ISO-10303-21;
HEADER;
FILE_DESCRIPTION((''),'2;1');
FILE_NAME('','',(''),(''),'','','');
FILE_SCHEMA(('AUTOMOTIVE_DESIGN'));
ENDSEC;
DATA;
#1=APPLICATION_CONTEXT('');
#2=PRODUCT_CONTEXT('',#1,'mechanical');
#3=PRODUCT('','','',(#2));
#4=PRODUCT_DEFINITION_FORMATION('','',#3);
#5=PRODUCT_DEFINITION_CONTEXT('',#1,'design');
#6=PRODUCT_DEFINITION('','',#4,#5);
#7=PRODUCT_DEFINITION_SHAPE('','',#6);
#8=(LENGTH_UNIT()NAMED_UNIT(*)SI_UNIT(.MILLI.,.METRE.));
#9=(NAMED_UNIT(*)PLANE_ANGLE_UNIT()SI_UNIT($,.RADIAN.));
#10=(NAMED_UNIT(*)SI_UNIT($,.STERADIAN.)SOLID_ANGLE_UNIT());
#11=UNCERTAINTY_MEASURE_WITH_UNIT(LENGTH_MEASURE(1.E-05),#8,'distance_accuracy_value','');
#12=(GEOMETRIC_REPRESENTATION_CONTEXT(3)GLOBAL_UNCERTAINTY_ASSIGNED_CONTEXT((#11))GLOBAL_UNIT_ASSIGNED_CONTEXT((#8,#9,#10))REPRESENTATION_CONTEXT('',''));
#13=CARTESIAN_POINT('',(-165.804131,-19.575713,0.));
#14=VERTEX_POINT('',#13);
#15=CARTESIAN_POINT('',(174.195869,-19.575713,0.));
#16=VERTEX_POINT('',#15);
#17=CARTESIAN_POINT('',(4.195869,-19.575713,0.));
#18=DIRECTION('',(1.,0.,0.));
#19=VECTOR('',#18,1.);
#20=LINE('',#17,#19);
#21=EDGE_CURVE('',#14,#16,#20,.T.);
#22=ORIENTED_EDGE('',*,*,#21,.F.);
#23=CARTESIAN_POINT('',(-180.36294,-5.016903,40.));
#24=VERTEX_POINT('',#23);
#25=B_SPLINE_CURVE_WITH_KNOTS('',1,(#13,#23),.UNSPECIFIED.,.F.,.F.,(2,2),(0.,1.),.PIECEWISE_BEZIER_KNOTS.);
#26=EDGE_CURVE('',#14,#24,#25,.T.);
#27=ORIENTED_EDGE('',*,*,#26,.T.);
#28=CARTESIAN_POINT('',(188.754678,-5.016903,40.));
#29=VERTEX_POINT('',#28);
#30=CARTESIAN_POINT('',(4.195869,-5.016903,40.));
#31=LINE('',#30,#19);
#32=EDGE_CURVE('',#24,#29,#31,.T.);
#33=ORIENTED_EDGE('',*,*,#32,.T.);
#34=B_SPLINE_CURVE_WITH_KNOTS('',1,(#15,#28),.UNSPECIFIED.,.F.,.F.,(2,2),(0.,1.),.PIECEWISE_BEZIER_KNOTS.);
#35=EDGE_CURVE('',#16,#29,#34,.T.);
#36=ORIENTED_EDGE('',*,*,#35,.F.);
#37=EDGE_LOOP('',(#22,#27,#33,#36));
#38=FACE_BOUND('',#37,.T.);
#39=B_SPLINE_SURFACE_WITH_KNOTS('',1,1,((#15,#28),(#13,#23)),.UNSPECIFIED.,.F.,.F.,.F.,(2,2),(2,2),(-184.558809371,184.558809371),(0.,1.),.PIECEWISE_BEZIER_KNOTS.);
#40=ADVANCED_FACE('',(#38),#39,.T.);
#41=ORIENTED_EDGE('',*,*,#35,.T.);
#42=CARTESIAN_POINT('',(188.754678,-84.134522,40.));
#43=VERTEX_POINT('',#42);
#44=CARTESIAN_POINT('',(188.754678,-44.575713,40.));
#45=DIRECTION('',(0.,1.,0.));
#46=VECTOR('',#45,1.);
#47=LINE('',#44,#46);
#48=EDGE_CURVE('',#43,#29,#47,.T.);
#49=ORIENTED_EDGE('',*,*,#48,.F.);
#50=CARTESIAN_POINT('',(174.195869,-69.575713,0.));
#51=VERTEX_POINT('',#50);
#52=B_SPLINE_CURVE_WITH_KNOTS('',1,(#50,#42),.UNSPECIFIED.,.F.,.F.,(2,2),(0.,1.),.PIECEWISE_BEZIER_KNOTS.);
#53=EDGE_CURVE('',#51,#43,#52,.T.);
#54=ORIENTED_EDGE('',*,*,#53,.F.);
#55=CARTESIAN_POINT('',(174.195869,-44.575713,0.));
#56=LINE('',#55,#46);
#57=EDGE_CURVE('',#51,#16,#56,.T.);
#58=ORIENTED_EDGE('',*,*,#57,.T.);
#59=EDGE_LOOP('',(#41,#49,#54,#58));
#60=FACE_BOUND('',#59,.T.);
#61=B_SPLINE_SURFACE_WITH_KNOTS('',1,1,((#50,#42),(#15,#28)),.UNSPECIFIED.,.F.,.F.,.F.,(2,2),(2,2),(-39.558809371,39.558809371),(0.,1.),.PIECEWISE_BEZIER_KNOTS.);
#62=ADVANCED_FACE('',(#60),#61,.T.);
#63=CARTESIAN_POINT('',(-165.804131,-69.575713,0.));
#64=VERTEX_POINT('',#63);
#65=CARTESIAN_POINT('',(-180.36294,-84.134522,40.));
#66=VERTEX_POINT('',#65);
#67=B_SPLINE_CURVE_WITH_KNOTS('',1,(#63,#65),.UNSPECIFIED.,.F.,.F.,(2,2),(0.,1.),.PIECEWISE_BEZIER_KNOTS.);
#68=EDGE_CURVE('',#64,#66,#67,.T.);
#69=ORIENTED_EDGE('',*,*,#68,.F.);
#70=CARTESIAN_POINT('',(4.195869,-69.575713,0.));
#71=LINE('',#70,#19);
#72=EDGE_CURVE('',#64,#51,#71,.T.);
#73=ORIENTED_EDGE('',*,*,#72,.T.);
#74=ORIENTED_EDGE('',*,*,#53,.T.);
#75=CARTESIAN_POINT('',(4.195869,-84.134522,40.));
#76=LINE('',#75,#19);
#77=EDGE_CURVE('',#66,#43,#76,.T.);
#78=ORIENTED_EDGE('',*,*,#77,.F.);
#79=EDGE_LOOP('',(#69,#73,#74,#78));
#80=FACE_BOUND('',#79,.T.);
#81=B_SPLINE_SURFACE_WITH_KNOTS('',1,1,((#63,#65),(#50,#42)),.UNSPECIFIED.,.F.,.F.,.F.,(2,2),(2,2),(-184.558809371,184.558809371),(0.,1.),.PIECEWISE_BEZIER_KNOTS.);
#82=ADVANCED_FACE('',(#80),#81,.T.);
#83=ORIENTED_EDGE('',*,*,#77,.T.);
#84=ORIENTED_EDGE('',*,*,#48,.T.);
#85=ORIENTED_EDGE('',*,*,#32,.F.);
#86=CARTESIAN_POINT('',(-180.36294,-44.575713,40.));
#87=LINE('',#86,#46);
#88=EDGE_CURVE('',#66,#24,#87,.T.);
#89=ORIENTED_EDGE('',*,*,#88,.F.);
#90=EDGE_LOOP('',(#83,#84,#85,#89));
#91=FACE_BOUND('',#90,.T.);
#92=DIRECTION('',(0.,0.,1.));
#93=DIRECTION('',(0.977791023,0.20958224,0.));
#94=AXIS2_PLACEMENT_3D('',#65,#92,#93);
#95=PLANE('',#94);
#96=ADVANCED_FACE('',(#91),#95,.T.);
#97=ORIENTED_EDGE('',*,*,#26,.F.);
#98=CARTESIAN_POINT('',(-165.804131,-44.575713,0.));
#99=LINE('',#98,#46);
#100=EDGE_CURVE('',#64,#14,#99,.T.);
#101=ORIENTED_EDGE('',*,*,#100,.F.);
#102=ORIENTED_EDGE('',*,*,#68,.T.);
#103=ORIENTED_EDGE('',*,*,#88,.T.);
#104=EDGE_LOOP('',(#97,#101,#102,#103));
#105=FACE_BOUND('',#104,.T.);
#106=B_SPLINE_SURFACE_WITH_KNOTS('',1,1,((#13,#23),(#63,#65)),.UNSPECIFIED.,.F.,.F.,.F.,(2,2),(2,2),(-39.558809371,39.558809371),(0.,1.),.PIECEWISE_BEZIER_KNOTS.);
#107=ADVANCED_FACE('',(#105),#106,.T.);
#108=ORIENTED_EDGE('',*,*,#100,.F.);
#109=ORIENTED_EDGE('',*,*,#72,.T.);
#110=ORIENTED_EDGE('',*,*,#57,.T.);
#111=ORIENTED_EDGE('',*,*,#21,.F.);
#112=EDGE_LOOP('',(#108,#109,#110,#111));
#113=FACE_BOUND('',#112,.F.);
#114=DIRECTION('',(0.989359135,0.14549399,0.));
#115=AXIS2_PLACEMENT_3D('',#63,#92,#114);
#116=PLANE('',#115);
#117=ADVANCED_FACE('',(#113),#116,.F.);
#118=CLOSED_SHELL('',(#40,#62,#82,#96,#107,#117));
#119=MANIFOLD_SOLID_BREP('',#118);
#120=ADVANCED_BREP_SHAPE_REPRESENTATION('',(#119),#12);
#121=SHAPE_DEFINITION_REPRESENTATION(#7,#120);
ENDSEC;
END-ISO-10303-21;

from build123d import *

# Parameters (mm, degrees)
F1_W     = 340
F1_H     = 50
F2_DEPTH = 40
F2_TAPER = -20


with BuildPart() as f2:
    # F1 (on face) → F2 (new body)
    with BuildSketch(Plane.XY):
        with Locations((4.195868969, -44.5757127798)):
            Rectangle(F1_W, F1_H)
    extrude(amount=F2_DEPTH, taper=F2_TAPER)


solid = f2.part
